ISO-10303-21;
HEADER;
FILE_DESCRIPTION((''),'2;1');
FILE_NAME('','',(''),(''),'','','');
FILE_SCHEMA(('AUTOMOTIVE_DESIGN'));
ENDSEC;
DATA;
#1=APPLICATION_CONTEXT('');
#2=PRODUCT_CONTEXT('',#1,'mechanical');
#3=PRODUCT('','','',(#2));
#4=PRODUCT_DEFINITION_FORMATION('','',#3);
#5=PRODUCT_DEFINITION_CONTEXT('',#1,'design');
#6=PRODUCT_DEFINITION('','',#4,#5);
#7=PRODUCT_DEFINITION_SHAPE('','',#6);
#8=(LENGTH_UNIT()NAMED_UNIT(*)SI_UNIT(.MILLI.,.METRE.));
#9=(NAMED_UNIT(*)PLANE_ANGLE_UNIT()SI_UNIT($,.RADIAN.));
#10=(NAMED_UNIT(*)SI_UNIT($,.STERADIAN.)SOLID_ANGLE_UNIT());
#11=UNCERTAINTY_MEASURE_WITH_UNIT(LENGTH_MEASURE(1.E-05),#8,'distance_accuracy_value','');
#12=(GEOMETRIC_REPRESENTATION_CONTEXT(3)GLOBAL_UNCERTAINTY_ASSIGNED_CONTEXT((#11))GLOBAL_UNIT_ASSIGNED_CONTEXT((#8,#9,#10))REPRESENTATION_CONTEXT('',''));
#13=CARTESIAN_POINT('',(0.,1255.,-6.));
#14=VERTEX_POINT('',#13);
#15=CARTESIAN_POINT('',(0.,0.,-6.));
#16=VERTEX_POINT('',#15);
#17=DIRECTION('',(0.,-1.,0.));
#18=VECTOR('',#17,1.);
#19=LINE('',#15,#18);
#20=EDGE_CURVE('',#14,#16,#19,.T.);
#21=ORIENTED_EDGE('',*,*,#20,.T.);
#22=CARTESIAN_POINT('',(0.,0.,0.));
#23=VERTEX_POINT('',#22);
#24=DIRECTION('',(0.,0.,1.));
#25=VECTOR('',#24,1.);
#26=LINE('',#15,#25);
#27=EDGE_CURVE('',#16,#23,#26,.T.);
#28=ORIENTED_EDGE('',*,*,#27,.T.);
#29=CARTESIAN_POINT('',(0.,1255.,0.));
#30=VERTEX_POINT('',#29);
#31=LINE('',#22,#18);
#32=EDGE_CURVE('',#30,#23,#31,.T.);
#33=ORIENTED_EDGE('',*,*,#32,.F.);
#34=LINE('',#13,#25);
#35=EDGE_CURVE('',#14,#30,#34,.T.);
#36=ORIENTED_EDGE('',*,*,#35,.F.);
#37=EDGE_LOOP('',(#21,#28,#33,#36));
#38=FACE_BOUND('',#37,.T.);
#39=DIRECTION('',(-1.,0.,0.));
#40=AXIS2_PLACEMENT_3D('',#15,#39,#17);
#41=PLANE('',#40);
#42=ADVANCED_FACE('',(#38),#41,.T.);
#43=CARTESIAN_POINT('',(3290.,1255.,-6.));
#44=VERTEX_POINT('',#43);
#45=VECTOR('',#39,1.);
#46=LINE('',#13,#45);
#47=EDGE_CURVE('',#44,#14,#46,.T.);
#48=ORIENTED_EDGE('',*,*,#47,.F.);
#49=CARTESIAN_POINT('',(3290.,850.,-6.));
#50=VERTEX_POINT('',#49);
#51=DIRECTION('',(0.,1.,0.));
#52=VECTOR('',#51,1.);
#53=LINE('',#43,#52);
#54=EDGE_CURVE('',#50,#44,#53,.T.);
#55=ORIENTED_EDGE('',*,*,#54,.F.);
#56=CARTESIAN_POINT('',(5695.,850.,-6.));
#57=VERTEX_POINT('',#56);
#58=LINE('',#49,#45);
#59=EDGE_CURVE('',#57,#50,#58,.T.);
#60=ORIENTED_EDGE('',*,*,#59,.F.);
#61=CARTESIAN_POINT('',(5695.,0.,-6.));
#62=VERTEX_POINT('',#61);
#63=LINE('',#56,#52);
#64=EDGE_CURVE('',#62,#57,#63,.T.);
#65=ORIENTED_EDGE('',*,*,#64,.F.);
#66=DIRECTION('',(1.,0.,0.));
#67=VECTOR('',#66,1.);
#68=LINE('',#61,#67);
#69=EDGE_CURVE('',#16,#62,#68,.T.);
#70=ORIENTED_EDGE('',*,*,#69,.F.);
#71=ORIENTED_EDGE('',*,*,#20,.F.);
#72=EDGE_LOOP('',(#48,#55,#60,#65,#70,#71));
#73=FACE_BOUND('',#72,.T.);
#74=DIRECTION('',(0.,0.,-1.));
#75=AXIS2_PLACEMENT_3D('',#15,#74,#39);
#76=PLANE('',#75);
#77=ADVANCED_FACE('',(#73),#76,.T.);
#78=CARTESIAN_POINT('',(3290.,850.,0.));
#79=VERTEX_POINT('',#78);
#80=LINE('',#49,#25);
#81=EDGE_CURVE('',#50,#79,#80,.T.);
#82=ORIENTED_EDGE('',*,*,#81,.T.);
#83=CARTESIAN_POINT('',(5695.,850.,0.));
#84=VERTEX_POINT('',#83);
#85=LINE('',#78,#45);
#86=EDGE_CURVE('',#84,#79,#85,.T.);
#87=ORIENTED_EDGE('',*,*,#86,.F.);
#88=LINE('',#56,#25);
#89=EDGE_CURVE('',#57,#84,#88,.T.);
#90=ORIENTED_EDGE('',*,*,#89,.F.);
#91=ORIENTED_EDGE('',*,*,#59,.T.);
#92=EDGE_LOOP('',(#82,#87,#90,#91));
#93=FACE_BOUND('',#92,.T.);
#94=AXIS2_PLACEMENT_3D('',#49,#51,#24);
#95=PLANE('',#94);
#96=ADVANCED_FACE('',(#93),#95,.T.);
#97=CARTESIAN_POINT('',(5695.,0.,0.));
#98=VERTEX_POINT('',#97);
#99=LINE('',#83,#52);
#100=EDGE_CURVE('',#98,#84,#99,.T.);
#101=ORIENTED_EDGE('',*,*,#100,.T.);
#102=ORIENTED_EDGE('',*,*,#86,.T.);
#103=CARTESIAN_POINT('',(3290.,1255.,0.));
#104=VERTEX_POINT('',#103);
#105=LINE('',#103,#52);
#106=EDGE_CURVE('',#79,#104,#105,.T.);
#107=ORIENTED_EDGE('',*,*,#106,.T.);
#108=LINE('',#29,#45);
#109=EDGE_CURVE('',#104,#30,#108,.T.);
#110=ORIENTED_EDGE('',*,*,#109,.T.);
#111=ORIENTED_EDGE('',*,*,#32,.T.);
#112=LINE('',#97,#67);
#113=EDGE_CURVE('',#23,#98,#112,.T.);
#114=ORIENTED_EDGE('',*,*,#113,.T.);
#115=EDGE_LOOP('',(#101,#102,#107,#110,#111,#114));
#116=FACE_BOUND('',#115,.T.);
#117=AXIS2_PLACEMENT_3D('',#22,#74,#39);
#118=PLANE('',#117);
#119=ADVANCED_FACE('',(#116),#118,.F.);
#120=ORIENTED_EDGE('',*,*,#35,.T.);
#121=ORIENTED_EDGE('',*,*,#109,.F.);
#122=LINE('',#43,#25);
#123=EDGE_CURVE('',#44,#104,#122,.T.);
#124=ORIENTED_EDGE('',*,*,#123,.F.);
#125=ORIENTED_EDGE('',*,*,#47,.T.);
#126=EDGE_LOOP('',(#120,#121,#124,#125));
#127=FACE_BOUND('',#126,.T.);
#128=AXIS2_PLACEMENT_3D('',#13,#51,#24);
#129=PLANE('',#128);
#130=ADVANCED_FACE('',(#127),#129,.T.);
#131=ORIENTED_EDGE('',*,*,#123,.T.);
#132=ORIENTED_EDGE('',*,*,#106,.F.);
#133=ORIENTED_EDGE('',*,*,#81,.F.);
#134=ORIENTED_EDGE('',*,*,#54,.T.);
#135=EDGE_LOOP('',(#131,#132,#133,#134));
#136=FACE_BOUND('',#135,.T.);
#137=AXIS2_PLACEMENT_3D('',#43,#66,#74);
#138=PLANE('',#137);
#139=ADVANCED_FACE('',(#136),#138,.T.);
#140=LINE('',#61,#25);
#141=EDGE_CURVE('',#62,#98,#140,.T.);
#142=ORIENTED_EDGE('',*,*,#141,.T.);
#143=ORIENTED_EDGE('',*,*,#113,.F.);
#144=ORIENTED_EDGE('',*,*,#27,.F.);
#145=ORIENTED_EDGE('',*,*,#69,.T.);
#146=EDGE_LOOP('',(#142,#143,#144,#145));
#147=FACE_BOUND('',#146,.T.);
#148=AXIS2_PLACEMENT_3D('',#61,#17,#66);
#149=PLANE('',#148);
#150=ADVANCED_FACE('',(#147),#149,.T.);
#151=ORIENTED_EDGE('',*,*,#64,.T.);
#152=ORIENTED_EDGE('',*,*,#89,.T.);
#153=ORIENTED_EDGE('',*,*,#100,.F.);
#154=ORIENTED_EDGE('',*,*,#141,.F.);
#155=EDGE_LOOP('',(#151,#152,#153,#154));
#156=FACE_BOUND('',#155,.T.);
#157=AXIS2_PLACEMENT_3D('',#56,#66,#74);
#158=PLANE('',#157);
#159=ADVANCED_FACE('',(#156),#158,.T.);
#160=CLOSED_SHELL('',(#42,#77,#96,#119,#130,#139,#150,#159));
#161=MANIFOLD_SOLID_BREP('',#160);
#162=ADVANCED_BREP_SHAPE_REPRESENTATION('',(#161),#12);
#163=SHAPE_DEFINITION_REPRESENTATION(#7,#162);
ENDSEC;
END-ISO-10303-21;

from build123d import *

# Parameters (mm, degrees)
TABAN_FLAN_1_DEPTH = 6


# Sheet-metal steps are written as plain solids
with BuildPart() as part:
    # Çizim1 → Taban-Flanş1 (new body)
    with BuildSketch(Plane.XY):
        Polygon((0, 0), (0, 1255), (3290, 1255), (3290, 850), (5695, 850), (5695, 0), align=None)
    extrude(amount=-TABAN_FLAN_1_DEPTH)


solid = part.part
